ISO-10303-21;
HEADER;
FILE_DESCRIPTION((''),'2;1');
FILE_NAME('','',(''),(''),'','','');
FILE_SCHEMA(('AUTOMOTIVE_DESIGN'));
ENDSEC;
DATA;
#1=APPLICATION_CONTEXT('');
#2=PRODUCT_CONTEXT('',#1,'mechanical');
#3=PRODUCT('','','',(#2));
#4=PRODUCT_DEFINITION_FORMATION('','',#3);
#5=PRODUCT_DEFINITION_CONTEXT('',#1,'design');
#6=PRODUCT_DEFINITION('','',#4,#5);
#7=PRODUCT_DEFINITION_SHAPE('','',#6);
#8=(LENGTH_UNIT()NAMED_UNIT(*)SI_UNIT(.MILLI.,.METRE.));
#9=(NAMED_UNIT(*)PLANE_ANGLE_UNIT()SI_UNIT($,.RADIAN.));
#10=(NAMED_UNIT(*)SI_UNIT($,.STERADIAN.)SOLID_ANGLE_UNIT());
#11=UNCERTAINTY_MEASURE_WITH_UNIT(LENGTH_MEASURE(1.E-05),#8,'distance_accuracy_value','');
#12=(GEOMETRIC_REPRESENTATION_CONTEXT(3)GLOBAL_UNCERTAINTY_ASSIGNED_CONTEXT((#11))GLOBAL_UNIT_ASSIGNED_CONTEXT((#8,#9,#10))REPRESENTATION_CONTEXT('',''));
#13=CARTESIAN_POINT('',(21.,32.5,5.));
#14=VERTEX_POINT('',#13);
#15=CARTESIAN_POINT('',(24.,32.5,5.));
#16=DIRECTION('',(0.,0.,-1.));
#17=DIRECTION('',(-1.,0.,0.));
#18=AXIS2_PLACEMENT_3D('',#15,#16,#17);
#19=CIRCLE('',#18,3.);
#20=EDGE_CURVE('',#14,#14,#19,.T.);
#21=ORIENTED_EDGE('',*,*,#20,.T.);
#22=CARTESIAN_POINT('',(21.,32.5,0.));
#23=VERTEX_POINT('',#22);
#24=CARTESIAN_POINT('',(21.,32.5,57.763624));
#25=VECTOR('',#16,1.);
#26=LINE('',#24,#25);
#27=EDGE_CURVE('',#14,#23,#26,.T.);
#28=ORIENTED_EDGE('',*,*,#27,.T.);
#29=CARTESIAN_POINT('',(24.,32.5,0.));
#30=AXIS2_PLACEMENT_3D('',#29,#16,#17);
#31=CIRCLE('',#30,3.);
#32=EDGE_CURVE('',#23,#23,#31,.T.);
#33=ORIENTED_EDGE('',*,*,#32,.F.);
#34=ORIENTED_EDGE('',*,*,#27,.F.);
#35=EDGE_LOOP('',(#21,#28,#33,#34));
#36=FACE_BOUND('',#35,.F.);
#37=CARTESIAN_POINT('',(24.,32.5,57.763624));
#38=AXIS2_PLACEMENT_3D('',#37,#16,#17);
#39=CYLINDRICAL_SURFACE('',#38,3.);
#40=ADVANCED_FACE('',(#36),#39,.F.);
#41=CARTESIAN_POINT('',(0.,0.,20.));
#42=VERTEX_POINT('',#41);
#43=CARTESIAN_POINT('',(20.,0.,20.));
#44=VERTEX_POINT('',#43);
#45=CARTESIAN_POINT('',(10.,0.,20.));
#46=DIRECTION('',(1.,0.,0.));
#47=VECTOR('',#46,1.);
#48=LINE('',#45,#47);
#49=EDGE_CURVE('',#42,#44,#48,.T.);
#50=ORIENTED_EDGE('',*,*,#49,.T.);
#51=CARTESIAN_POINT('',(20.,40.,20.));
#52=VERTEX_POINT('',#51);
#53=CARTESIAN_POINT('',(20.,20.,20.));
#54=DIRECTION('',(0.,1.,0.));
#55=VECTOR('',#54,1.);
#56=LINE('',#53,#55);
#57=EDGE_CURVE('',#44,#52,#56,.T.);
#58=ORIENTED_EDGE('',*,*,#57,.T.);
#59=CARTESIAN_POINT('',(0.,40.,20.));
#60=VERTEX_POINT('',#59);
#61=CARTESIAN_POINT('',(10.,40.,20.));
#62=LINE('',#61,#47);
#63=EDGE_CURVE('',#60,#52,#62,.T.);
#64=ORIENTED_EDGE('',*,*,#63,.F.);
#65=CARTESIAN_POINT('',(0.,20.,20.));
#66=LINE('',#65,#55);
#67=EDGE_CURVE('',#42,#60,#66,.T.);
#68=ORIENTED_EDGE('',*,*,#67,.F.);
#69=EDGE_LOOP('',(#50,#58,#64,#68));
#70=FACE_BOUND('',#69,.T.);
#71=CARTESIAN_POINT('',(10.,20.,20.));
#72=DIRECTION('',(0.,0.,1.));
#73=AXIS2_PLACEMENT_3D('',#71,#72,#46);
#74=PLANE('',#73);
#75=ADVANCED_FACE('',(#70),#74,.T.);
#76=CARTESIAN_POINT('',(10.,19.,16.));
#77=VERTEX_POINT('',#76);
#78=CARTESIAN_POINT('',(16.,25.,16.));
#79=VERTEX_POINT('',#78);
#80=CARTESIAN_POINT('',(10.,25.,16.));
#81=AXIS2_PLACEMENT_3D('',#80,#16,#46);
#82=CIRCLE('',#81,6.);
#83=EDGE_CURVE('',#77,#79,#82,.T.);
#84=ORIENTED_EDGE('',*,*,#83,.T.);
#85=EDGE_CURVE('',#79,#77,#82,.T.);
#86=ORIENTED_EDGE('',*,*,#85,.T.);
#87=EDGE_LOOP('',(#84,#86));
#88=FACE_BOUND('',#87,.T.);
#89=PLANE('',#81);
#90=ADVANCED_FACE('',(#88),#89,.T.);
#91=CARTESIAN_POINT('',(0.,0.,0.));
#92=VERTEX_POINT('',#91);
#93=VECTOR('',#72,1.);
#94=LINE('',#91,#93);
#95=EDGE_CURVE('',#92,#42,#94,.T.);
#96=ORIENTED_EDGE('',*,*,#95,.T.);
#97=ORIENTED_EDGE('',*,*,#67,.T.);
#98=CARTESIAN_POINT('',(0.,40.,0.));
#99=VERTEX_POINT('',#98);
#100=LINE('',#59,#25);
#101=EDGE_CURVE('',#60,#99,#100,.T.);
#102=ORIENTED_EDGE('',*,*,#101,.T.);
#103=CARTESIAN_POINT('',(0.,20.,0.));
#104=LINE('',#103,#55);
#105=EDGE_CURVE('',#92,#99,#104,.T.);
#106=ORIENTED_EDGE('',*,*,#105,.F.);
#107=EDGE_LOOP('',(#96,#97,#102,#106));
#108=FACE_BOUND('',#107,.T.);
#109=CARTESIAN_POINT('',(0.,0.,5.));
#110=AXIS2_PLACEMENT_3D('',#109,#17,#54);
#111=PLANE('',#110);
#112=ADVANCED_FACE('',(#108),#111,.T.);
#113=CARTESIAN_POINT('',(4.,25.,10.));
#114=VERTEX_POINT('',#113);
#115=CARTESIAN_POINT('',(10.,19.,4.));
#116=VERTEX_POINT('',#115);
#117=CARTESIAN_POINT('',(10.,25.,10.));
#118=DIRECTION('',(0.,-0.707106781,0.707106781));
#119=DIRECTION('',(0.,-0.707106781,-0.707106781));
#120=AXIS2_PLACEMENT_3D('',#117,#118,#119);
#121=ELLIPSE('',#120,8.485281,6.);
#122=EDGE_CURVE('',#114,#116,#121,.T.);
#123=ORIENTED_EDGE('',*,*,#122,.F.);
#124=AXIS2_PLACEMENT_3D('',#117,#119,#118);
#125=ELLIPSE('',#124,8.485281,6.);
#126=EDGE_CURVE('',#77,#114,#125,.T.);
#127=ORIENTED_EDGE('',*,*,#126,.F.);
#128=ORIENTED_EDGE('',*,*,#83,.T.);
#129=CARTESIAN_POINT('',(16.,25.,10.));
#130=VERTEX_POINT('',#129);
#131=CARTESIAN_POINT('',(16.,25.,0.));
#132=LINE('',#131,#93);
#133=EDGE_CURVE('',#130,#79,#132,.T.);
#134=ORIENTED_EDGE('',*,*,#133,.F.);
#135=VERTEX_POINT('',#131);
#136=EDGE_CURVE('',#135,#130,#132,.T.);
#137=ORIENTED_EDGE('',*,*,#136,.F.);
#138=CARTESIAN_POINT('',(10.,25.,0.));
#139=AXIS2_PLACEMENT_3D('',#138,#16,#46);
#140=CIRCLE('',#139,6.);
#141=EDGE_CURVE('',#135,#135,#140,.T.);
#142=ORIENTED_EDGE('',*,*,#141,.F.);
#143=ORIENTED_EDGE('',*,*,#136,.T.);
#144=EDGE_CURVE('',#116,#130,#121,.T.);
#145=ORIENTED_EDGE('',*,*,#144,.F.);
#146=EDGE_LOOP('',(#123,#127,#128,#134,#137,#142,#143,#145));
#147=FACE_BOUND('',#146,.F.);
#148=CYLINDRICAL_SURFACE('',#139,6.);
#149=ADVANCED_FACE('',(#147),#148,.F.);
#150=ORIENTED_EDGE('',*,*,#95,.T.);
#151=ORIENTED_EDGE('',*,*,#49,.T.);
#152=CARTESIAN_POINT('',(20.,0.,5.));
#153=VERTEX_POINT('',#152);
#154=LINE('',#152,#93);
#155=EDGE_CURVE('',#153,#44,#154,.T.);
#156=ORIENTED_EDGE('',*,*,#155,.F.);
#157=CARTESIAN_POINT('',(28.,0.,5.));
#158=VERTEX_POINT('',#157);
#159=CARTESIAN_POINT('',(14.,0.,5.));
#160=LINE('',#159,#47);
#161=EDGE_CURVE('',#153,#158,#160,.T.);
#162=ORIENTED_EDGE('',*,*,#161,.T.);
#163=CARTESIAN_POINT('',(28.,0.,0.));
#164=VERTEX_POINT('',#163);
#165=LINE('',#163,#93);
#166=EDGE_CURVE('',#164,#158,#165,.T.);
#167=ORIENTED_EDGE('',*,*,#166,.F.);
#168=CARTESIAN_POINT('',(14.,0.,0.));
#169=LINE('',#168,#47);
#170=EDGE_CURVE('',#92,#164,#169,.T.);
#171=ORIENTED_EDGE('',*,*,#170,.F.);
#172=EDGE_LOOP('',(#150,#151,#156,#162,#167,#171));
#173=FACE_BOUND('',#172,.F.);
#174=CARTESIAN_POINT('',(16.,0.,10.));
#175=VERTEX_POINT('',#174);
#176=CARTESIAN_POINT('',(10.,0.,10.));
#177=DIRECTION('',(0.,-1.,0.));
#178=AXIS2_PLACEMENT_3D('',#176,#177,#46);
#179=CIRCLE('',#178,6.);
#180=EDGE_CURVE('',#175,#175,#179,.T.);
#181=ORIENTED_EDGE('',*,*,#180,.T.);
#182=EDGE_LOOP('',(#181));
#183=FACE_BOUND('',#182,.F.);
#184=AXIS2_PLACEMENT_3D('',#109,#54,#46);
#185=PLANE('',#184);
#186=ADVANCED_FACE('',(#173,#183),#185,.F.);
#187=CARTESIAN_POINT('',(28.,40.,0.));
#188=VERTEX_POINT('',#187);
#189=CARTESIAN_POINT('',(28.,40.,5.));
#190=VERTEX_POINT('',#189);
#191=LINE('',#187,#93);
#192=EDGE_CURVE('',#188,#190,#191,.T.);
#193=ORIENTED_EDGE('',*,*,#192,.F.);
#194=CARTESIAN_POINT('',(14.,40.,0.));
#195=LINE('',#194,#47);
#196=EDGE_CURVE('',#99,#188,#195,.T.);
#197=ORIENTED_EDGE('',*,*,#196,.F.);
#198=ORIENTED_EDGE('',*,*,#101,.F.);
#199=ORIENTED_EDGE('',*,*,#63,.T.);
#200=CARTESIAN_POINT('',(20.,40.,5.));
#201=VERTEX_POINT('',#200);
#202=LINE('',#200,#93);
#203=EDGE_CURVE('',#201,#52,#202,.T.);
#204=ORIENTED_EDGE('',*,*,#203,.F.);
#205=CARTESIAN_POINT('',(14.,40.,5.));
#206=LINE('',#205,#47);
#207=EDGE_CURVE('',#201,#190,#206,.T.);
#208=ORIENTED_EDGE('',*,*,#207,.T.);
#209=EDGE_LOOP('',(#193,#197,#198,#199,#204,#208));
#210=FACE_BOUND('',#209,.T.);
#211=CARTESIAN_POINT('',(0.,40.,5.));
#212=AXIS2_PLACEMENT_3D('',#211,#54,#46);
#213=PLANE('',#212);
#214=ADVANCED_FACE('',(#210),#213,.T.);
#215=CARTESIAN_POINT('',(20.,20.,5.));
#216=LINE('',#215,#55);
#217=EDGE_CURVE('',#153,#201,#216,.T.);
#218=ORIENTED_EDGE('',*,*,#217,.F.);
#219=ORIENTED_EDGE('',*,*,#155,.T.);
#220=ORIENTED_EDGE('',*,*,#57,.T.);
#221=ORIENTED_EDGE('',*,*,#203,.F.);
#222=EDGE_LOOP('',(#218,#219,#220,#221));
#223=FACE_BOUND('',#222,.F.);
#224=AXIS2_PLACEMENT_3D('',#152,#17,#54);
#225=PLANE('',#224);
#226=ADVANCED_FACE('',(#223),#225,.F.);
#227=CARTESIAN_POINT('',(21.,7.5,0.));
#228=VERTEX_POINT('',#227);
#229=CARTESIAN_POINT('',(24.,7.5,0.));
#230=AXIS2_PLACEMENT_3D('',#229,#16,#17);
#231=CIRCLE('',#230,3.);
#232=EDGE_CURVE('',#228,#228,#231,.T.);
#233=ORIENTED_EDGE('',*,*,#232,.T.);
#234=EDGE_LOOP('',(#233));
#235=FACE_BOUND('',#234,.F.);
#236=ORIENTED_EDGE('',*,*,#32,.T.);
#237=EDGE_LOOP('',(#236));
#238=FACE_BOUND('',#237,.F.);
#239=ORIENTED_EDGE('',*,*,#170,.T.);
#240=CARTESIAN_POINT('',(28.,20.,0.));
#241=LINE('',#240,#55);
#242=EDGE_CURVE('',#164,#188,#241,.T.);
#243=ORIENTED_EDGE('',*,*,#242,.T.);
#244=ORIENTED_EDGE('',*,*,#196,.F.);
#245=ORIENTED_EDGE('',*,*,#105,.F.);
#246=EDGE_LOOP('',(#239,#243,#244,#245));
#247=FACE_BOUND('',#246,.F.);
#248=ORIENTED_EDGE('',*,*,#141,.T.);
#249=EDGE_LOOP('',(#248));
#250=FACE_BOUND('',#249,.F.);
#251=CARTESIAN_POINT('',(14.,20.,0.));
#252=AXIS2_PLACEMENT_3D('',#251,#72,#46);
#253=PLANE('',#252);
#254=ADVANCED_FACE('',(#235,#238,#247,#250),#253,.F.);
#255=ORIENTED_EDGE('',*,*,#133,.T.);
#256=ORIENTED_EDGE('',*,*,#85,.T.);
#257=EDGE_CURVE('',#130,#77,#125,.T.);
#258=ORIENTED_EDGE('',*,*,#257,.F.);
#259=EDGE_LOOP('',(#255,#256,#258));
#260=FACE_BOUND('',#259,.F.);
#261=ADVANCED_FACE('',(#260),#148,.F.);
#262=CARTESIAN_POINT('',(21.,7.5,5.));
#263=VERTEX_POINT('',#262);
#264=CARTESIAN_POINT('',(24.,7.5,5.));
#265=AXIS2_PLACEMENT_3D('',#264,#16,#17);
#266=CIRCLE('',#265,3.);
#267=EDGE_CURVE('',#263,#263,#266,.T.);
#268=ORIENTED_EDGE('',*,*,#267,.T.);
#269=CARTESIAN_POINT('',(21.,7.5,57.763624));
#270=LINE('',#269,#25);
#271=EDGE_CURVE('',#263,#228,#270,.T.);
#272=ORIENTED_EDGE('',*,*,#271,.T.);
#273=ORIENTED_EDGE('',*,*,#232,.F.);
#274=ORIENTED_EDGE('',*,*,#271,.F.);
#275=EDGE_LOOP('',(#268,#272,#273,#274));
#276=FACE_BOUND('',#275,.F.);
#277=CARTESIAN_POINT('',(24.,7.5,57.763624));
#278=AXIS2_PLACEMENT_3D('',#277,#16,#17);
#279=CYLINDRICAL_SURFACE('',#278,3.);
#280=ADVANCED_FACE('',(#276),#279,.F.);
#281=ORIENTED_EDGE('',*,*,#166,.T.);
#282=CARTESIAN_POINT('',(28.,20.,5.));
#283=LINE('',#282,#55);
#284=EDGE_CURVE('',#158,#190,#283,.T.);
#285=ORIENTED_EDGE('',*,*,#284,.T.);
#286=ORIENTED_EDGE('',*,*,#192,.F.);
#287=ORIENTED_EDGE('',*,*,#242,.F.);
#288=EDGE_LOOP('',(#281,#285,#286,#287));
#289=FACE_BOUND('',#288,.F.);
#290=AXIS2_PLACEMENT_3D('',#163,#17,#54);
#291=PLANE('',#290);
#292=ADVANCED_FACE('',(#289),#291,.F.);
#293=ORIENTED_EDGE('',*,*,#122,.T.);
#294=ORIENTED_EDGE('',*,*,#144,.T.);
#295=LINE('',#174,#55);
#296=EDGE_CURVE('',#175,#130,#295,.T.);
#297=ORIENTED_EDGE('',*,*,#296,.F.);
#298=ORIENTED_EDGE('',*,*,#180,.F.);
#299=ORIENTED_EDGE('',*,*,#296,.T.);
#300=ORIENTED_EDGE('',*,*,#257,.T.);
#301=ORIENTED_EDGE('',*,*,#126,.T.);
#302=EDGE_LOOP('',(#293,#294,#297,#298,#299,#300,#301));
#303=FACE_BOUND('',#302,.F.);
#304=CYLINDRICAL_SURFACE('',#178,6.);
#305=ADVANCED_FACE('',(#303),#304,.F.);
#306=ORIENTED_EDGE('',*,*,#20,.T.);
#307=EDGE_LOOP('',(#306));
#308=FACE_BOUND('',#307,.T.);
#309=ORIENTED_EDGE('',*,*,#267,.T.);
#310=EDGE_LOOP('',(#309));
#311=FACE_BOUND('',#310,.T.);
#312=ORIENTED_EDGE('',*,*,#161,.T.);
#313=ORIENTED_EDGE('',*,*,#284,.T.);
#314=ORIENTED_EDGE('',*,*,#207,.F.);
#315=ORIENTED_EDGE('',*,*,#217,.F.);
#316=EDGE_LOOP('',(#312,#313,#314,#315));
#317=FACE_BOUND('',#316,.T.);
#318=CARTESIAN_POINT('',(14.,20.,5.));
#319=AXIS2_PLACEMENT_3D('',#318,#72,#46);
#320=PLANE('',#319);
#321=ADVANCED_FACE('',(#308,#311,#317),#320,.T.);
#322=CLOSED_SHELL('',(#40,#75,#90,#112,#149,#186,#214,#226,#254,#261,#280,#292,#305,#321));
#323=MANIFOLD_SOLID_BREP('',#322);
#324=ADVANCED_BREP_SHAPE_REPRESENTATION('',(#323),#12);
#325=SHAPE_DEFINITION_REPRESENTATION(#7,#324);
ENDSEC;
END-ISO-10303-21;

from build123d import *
from build123d import SkipClean  # not in build123d's __all__

# Parameters (mm, degrees)
F0_W     = 28
F0_H     = 40
F1_DEPTH = 5
F2_W     = 20
F2_H     = 40
F3_DEPTH = 15
F6_D     = 6
F4_R     = 6
F7_DEPTH = 25
F8_R     = 6
F9_DEPTH = 16


with BuildPart() as f1:
    # F0 (on Top) → F1 (new body)
    with BuildSketch(Plane.XY):
        with Locations((14, 20)):
            Rectangle(F0_W, F0_H)
    extrude(amount=F1_DEPTH)

    # F2 (on face) → F3 (join)
    with BuildSketch(Plane.XY.offset(5)):
        with Locations((10, 20)):
            Rectangle(F2_W, F2_H)
    extrude(amount=F3_DEPTH)

    # F6 (through all)
    with Locations(Plane.XY.offset(5)):
        with Locations((24, 32.5), (24, 7.5)):
            Hole(F6_D / 2)

    # F4 (on face) → F7 (cut)
    with BuildSketch(Plane.XZ):
        with Locations((10, 10)):
            Circle(F4_R)
    extrude(amount=-F7_DEPTH, mode=Mode.SUBTRACT)

    # F8 (on face) → F9 (cut)
    with BuildSketch(Plane(origin=(0, 0, 0), x_dir=(1, 0, 0), z_dir=(0, 0, -1))):
        with Locations((10, -25)):
            Circle(F8_R)
    with SkipClean():  # cleaning this boolean's faces spoils the solid; the shape is the same uncleaned
        extrude(amount=-F9_DEPTH, mode=Mode.SUBTRACT)


solid = f1.part
